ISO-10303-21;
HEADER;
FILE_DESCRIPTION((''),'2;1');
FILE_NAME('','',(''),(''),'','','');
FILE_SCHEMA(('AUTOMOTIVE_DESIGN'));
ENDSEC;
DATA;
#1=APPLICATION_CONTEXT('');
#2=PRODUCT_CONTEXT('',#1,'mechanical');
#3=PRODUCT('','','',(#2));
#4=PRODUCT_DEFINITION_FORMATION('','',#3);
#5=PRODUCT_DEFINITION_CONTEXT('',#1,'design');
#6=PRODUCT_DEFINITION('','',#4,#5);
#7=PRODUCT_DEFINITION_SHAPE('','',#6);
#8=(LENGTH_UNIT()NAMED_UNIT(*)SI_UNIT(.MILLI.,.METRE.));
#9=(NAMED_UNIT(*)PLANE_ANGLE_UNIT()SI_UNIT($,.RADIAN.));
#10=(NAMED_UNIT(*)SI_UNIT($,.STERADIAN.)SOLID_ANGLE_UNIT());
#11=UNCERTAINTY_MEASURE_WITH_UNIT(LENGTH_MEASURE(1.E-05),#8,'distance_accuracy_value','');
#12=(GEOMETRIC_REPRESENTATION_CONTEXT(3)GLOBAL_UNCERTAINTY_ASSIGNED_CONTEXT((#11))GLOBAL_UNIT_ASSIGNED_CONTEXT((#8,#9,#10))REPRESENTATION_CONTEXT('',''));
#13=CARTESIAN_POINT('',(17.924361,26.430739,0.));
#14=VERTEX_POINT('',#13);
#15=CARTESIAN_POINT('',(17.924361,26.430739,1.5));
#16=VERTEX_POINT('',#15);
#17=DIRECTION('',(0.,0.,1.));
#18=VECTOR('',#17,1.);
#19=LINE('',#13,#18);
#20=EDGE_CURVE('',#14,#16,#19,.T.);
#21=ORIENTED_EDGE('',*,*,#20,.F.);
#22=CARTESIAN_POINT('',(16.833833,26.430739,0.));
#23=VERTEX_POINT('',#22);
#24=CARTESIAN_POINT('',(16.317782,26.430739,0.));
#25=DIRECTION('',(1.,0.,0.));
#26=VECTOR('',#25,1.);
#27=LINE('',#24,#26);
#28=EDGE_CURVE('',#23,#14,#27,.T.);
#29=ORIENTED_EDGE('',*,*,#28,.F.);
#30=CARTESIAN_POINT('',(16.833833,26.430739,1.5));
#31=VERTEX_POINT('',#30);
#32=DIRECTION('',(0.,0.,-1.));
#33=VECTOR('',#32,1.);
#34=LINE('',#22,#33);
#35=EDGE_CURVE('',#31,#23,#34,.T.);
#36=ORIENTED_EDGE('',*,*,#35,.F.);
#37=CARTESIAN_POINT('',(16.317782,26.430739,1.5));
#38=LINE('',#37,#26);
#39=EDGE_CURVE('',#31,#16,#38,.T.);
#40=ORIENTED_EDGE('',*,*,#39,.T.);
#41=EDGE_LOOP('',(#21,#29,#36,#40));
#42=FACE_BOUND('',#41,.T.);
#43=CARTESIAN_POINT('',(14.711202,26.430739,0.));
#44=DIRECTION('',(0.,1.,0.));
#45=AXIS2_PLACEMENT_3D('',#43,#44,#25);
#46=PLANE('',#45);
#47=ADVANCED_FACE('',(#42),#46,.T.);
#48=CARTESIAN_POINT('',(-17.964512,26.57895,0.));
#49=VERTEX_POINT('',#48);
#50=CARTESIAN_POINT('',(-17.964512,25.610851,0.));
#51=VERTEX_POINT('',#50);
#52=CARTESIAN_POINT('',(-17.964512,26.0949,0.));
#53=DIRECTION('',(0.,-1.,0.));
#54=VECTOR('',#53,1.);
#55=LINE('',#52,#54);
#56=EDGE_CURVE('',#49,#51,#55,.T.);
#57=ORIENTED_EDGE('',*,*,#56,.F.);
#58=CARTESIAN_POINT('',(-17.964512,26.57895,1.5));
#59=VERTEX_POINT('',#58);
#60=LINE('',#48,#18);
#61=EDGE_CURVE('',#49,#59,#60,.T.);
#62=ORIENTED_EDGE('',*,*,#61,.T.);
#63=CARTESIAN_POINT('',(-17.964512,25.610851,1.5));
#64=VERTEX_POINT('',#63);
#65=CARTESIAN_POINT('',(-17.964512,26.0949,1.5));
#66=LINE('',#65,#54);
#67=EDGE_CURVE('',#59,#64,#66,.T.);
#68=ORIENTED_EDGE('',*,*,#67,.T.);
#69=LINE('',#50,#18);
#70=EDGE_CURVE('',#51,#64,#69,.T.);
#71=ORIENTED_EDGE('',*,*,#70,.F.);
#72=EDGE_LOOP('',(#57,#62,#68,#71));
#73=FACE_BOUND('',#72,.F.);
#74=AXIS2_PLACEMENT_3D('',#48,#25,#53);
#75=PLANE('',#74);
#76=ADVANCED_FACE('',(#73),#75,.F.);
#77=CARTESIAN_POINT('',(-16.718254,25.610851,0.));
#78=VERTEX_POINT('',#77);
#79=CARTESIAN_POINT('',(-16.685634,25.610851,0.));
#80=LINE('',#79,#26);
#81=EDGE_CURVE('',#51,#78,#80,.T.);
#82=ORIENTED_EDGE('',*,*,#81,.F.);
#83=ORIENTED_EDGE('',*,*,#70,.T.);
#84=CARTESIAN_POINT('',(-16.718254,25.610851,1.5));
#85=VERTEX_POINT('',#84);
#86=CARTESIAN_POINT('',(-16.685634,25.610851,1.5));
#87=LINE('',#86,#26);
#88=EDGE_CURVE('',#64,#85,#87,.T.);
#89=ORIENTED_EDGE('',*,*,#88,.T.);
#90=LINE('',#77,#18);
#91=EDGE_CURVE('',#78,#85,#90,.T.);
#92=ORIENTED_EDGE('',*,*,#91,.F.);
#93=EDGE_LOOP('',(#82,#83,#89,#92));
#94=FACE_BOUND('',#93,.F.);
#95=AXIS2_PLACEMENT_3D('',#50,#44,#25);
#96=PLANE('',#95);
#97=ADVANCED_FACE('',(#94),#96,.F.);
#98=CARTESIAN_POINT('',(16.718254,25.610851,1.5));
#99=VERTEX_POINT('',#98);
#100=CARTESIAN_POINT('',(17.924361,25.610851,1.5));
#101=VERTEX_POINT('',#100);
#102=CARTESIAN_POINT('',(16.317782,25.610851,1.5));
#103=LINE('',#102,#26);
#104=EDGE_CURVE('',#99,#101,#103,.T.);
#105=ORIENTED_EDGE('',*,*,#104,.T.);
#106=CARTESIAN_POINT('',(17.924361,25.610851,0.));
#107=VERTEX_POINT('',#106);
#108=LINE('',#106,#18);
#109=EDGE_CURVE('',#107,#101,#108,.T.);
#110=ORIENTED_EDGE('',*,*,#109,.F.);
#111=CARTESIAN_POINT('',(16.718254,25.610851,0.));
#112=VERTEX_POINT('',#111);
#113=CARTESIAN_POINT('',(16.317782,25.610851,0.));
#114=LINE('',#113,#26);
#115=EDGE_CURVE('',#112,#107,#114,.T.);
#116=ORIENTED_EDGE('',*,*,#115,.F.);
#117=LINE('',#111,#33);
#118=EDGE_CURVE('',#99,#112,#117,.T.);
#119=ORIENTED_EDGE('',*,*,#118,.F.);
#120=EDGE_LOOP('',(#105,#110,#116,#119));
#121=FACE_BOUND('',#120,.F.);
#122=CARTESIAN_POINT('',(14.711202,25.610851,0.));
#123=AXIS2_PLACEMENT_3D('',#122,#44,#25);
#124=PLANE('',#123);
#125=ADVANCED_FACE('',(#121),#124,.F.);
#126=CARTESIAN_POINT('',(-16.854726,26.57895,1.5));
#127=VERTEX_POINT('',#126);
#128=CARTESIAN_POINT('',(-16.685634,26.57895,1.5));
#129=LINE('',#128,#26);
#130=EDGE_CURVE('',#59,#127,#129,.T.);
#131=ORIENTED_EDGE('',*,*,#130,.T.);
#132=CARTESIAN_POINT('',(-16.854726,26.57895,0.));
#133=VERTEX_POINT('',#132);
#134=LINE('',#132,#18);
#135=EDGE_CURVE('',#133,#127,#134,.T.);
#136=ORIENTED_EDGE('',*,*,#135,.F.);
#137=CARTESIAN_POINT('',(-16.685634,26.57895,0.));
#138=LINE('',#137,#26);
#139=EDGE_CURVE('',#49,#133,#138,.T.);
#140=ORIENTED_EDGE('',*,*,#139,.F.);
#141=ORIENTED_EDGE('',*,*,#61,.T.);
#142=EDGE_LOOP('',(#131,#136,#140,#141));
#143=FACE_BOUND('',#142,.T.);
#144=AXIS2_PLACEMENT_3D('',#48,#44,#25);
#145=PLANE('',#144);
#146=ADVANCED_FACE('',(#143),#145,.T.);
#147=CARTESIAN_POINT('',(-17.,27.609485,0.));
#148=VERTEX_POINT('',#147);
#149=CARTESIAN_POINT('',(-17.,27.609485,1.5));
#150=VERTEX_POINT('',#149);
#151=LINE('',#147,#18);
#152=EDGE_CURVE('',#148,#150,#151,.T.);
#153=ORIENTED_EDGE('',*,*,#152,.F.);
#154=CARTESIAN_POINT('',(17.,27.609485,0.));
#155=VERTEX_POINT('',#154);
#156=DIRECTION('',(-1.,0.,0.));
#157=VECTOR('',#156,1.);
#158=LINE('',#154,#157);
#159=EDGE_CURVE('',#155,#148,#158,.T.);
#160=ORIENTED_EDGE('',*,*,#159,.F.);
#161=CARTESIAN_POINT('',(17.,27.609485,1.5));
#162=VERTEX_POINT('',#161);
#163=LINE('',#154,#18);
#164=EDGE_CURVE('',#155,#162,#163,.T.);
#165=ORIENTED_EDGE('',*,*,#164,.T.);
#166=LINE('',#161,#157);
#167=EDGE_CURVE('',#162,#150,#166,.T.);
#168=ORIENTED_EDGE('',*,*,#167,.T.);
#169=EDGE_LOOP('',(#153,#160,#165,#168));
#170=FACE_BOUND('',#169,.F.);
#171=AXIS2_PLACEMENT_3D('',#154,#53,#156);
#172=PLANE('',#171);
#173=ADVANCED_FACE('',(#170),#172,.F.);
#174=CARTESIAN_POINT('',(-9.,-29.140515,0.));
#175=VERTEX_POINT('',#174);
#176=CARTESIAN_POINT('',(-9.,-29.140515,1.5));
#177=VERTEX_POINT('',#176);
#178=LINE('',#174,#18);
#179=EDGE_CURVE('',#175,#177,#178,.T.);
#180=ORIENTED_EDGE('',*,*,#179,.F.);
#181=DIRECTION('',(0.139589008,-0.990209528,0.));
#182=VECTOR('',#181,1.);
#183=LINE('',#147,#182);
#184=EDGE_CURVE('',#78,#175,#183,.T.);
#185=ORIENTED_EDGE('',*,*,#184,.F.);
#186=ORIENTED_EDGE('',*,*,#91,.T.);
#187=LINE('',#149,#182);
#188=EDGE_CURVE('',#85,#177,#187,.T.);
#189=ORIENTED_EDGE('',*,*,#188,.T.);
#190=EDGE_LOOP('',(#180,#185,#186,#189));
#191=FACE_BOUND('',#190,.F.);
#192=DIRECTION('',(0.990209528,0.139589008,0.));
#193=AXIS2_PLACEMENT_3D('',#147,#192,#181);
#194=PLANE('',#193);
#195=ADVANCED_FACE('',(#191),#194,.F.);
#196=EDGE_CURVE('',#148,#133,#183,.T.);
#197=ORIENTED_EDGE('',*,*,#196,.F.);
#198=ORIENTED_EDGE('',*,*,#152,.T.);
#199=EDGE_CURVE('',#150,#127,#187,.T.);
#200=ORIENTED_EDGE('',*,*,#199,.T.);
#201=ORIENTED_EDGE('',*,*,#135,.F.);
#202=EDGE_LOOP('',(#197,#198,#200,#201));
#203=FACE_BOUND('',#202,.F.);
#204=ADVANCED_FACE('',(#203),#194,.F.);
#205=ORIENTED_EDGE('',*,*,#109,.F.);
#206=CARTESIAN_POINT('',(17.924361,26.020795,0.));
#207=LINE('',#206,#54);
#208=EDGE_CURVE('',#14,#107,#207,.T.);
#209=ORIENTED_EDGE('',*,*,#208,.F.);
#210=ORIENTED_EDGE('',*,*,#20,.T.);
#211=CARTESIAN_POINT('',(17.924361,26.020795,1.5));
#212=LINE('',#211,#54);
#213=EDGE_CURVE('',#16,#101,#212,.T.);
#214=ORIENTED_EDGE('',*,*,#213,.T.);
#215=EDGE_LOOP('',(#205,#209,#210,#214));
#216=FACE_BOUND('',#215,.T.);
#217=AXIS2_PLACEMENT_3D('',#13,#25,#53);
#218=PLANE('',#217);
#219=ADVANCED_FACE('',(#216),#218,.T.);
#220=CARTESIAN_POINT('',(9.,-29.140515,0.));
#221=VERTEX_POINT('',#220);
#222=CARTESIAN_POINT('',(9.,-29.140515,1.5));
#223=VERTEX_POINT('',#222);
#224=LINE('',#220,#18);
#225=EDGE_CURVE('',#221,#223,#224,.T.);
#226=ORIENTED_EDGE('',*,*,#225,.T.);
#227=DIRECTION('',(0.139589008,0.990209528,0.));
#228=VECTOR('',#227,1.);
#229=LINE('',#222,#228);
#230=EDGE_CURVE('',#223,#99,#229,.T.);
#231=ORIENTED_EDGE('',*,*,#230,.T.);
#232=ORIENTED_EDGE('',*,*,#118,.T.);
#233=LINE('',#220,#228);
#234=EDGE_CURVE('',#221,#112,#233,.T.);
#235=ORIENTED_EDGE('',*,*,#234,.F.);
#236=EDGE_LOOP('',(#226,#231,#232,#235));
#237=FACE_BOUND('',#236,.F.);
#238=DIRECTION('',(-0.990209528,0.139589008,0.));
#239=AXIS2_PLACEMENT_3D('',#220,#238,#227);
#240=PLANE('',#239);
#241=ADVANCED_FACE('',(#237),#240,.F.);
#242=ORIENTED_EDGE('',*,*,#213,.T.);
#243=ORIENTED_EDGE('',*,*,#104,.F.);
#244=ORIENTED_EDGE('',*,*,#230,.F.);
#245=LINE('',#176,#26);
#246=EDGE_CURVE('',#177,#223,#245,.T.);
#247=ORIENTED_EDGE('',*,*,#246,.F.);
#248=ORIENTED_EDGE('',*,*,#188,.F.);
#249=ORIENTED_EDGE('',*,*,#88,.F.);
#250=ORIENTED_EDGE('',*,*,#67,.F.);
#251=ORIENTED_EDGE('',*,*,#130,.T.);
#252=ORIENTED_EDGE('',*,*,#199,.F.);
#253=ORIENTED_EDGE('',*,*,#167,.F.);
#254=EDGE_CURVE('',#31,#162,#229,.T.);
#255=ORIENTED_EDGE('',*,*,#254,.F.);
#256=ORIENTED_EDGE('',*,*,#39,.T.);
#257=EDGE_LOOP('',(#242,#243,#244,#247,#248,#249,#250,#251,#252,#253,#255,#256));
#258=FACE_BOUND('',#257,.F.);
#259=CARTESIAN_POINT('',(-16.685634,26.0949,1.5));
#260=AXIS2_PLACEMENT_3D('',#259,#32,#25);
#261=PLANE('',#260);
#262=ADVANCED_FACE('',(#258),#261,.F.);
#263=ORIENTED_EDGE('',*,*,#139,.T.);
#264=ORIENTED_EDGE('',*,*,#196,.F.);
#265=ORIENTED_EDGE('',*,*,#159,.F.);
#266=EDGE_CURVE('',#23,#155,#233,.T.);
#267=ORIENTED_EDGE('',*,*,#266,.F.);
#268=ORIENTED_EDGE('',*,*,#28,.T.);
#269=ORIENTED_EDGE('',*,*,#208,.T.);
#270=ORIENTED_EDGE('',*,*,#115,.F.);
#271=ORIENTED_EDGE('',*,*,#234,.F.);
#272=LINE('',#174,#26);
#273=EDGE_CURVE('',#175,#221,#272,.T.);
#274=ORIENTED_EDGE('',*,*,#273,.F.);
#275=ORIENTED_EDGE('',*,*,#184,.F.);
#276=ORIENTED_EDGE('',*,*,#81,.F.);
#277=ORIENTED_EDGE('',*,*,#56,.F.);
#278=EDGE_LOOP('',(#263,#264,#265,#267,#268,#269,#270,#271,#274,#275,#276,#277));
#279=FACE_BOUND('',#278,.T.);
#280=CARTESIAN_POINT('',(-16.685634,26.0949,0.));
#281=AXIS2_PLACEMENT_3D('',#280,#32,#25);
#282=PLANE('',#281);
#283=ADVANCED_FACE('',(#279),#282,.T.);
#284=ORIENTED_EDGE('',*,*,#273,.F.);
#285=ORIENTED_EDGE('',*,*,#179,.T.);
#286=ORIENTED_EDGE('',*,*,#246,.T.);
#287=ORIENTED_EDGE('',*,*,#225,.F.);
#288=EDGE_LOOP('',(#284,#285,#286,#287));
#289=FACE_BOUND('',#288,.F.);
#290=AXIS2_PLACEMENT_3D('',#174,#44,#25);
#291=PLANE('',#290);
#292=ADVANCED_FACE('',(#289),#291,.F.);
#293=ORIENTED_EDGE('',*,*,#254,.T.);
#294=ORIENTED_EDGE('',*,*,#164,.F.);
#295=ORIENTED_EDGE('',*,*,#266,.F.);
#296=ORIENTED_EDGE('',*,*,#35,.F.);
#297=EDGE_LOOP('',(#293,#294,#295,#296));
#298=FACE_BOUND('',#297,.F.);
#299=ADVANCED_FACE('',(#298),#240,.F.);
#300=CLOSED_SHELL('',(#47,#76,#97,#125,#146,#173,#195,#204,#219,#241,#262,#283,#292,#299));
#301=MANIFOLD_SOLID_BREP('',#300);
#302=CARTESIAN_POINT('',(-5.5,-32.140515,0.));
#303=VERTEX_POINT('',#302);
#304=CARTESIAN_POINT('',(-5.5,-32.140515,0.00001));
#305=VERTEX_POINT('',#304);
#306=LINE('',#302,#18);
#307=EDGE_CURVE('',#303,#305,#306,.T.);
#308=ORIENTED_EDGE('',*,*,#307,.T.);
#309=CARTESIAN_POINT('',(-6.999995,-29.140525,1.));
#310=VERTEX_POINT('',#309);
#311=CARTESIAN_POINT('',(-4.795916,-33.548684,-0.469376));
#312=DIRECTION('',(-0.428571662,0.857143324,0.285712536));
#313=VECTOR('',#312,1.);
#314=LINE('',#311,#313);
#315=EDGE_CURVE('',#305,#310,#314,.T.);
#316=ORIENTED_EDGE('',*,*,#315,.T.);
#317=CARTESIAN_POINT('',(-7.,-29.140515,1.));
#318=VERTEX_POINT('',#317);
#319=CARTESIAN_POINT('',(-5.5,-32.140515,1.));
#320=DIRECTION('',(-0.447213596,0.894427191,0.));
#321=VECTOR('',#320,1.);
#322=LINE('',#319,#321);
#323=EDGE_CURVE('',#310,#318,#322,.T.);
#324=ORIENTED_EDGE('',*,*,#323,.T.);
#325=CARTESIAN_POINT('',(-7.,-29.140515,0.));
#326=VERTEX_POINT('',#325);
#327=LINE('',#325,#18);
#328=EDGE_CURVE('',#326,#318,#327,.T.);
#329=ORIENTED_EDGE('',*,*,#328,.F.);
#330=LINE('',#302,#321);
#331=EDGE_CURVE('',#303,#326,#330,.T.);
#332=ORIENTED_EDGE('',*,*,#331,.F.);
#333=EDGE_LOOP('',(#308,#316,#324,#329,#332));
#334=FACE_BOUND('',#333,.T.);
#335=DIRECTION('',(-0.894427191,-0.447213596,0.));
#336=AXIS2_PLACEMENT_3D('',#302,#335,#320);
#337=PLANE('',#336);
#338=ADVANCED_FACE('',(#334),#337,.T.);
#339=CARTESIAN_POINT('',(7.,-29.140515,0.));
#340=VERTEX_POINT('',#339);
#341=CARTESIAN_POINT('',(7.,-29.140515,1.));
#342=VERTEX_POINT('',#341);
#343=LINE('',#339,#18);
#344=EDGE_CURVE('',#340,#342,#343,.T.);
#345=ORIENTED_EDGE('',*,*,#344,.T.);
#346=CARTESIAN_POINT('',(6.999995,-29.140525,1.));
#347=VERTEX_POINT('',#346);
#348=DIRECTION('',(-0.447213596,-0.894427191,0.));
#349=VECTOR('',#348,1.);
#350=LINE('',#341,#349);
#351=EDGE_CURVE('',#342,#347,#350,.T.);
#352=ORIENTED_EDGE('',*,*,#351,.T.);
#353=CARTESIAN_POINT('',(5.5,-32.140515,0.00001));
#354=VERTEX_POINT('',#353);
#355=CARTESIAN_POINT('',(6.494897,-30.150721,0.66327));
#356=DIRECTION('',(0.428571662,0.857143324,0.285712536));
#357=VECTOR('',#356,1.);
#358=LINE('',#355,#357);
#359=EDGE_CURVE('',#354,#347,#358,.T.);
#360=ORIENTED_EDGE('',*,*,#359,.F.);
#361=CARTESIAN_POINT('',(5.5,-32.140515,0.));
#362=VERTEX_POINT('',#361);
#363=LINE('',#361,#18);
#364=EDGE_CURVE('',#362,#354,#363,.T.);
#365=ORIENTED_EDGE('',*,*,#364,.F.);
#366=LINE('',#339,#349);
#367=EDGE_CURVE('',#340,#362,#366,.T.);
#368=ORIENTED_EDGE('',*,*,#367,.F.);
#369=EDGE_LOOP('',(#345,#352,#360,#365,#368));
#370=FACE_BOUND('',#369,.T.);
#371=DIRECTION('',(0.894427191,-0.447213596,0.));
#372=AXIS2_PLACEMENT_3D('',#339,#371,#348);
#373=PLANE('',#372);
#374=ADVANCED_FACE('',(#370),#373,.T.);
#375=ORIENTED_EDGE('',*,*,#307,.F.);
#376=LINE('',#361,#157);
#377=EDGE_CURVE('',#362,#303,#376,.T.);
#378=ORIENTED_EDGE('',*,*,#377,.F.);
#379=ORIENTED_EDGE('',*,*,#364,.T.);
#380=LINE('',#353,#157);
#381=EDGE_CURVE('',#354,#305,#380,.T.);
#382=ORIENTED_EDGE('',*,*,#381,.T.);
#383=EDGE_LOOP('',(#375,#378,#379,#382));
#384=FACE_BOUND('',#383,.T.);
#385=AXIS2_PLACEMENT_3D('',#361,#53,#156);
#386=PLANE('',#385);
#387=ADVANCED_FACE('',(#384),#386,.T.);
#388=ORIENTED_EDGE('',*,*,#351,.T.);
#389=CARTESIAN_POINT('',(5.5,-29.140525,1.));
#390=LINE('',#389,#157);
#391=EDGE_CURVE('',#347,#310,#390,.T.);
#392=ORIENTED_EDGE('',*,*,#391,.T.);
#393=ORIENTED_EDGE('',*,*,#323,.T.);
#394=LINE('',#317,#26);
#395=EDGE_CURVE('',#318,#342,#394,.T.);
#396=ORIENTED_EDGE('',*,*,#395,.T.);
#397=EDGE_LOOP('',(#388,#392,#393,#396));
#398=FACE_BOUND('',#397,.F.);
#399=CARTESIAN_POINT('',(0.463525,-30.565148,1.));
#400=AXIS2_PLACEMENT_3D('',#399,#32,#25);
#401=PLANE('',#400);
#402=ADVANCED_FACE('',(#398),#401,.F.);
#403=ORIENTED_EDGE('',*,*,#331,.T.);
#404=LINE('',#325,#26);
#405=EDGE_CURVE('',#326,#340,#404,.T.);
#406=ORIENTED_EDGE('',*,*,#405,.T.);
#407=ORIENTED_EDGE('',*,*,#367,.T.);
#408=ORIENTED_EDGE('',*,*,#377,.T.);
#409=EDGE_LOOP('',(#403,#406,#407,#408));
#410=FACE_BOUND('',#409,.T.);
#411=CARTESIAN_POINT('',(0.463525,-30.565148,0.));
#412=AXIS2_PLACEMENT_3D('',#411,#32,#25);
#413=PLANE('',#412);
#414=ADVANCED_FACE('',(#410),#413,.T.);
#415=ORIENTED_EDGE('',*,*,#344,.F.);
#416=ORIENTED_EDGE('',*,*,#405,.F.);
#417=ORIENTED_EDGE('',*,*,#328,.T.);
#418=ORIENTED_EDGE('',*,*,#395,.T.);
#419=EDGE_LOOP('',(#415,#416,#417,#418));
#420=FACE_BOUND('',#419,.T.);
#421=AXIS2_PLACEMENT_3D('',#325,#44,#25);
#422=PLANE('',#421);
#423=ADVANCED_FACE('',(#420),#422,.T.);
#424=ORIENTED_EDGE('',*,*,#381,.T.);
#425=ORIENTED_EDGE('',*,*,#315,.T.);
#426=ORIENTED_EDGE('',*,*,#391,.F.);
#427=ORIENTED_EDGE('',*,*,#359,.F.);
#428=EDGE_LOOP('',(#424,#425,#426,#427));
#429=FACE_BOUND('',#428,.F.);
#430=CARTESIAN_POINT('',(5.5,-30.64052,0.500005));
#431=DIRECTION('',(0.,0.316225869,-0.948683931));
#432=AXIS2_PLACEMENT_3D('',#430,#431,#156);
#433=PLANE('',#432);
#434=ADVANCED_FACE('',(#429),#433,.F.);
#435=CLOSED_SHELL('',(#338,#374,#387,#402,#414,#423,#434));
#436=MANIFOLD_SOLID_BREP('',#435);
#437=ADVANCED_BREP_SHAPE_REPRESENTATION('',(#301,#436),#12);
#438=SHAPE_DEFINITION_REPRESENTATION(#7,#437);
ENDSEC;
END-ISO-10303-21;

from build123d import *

# Parameters (mm, degrees)
F1_DEPTH = 1.5
F3_DEPTH = 1
F4_SIZE2 = 2.99999
F4_SIZE  = 0.99999
F5_W     = 2.5577563792
F5_H     = 0.9680986404
F5_W_2   = 3.2131588086
F5_H_2   = 0.8198879659
F6_DEPTH = 1.5
F7_DEPTH = 1.5


# Not quite as in the source:
# - a fillet or chamfer is up to 0.001 mm smaller than in the source, because OpenCascade refuses the exact size


with BuildPart() as f1:
    # F0 (on Top) → F1 (new body)
    with BuildSketch(Plane.XY):
        Polygon((17, 27.609485096), (0, 27.609485096), (0, -29.140514904), (7, -29.140514904), (9, -29.140514904), align=None)
        Polygon((0, -29.140514904), (0, 27.609485096), (-17, 27.609485096), (-9, -29.140514904), (-7, -29.140514904), align=None)
    extrude(amount=F1_DEPTH)

    # F5 (on face) → F6 (join)
    with BuildSketch(Plane(origin=(0, 0, 0), x_dir=(1, 0, 0), z_dir=(0, 0, -1))):
        with Locations((-16.6856339201, -26.0949004441)):
            Rectangle(F5_W, F5_H)
        with Locations((16.3177815266, -26.0207951069)):
            Rectangle(F5_W_2, F5_H_2)
    extrude(amount=-F6_DEPTH)

    # F5 (on face) → F7 (join)
    with BuildSketch(Plane(origin=(0, 0, 0), x_dir=(1, 0, 0), z_dir=(0, 0, -1))):
        with Locations((-16.6856339201, -26.0949004441)):
            Rectangle(F5_W, F5_H)
        with Locations((16.3177815266, -26.0207951069)):
            Rectangle(F5_W_2, F5_H_2)
    extrude(amount=-F7_DEPTH)


with BuildPart() as f3:
    # F2 (on face) → F3 (new body)
    with BuildSketch(Plane(origin=(0, 0, 0), x_dir=(1, 0, 0), z_dir=(0, 0, -1))):
        Polygon((-5.5, 29.140514904), (0, 29.140514904), (5.5, 29.140514904), (7, 29.140514904), (5.5, 32.140514904), (0, 32.140514904), (-5.5, 32.140514904), align=None)
        Polygon((-7, 29.140514904), (-5.5, 29.140514904), (-5.5, 32.140514904), align=None)
    extrude(amount=-F3_DEPTH)

    # F4 (size 1 and 3 in the source; OpenCascade refuses exactly that, so slightly less here)
    f4_edges = [f3.edges().sort_by_distance(p)[0] for p in [
        (0, -32.140515, 1),
    ]]
    chamfer(f4_edges, length=F4_SIZE, length2=F4_SIZE2)


solid = Compound([f1.part, f3.part])
